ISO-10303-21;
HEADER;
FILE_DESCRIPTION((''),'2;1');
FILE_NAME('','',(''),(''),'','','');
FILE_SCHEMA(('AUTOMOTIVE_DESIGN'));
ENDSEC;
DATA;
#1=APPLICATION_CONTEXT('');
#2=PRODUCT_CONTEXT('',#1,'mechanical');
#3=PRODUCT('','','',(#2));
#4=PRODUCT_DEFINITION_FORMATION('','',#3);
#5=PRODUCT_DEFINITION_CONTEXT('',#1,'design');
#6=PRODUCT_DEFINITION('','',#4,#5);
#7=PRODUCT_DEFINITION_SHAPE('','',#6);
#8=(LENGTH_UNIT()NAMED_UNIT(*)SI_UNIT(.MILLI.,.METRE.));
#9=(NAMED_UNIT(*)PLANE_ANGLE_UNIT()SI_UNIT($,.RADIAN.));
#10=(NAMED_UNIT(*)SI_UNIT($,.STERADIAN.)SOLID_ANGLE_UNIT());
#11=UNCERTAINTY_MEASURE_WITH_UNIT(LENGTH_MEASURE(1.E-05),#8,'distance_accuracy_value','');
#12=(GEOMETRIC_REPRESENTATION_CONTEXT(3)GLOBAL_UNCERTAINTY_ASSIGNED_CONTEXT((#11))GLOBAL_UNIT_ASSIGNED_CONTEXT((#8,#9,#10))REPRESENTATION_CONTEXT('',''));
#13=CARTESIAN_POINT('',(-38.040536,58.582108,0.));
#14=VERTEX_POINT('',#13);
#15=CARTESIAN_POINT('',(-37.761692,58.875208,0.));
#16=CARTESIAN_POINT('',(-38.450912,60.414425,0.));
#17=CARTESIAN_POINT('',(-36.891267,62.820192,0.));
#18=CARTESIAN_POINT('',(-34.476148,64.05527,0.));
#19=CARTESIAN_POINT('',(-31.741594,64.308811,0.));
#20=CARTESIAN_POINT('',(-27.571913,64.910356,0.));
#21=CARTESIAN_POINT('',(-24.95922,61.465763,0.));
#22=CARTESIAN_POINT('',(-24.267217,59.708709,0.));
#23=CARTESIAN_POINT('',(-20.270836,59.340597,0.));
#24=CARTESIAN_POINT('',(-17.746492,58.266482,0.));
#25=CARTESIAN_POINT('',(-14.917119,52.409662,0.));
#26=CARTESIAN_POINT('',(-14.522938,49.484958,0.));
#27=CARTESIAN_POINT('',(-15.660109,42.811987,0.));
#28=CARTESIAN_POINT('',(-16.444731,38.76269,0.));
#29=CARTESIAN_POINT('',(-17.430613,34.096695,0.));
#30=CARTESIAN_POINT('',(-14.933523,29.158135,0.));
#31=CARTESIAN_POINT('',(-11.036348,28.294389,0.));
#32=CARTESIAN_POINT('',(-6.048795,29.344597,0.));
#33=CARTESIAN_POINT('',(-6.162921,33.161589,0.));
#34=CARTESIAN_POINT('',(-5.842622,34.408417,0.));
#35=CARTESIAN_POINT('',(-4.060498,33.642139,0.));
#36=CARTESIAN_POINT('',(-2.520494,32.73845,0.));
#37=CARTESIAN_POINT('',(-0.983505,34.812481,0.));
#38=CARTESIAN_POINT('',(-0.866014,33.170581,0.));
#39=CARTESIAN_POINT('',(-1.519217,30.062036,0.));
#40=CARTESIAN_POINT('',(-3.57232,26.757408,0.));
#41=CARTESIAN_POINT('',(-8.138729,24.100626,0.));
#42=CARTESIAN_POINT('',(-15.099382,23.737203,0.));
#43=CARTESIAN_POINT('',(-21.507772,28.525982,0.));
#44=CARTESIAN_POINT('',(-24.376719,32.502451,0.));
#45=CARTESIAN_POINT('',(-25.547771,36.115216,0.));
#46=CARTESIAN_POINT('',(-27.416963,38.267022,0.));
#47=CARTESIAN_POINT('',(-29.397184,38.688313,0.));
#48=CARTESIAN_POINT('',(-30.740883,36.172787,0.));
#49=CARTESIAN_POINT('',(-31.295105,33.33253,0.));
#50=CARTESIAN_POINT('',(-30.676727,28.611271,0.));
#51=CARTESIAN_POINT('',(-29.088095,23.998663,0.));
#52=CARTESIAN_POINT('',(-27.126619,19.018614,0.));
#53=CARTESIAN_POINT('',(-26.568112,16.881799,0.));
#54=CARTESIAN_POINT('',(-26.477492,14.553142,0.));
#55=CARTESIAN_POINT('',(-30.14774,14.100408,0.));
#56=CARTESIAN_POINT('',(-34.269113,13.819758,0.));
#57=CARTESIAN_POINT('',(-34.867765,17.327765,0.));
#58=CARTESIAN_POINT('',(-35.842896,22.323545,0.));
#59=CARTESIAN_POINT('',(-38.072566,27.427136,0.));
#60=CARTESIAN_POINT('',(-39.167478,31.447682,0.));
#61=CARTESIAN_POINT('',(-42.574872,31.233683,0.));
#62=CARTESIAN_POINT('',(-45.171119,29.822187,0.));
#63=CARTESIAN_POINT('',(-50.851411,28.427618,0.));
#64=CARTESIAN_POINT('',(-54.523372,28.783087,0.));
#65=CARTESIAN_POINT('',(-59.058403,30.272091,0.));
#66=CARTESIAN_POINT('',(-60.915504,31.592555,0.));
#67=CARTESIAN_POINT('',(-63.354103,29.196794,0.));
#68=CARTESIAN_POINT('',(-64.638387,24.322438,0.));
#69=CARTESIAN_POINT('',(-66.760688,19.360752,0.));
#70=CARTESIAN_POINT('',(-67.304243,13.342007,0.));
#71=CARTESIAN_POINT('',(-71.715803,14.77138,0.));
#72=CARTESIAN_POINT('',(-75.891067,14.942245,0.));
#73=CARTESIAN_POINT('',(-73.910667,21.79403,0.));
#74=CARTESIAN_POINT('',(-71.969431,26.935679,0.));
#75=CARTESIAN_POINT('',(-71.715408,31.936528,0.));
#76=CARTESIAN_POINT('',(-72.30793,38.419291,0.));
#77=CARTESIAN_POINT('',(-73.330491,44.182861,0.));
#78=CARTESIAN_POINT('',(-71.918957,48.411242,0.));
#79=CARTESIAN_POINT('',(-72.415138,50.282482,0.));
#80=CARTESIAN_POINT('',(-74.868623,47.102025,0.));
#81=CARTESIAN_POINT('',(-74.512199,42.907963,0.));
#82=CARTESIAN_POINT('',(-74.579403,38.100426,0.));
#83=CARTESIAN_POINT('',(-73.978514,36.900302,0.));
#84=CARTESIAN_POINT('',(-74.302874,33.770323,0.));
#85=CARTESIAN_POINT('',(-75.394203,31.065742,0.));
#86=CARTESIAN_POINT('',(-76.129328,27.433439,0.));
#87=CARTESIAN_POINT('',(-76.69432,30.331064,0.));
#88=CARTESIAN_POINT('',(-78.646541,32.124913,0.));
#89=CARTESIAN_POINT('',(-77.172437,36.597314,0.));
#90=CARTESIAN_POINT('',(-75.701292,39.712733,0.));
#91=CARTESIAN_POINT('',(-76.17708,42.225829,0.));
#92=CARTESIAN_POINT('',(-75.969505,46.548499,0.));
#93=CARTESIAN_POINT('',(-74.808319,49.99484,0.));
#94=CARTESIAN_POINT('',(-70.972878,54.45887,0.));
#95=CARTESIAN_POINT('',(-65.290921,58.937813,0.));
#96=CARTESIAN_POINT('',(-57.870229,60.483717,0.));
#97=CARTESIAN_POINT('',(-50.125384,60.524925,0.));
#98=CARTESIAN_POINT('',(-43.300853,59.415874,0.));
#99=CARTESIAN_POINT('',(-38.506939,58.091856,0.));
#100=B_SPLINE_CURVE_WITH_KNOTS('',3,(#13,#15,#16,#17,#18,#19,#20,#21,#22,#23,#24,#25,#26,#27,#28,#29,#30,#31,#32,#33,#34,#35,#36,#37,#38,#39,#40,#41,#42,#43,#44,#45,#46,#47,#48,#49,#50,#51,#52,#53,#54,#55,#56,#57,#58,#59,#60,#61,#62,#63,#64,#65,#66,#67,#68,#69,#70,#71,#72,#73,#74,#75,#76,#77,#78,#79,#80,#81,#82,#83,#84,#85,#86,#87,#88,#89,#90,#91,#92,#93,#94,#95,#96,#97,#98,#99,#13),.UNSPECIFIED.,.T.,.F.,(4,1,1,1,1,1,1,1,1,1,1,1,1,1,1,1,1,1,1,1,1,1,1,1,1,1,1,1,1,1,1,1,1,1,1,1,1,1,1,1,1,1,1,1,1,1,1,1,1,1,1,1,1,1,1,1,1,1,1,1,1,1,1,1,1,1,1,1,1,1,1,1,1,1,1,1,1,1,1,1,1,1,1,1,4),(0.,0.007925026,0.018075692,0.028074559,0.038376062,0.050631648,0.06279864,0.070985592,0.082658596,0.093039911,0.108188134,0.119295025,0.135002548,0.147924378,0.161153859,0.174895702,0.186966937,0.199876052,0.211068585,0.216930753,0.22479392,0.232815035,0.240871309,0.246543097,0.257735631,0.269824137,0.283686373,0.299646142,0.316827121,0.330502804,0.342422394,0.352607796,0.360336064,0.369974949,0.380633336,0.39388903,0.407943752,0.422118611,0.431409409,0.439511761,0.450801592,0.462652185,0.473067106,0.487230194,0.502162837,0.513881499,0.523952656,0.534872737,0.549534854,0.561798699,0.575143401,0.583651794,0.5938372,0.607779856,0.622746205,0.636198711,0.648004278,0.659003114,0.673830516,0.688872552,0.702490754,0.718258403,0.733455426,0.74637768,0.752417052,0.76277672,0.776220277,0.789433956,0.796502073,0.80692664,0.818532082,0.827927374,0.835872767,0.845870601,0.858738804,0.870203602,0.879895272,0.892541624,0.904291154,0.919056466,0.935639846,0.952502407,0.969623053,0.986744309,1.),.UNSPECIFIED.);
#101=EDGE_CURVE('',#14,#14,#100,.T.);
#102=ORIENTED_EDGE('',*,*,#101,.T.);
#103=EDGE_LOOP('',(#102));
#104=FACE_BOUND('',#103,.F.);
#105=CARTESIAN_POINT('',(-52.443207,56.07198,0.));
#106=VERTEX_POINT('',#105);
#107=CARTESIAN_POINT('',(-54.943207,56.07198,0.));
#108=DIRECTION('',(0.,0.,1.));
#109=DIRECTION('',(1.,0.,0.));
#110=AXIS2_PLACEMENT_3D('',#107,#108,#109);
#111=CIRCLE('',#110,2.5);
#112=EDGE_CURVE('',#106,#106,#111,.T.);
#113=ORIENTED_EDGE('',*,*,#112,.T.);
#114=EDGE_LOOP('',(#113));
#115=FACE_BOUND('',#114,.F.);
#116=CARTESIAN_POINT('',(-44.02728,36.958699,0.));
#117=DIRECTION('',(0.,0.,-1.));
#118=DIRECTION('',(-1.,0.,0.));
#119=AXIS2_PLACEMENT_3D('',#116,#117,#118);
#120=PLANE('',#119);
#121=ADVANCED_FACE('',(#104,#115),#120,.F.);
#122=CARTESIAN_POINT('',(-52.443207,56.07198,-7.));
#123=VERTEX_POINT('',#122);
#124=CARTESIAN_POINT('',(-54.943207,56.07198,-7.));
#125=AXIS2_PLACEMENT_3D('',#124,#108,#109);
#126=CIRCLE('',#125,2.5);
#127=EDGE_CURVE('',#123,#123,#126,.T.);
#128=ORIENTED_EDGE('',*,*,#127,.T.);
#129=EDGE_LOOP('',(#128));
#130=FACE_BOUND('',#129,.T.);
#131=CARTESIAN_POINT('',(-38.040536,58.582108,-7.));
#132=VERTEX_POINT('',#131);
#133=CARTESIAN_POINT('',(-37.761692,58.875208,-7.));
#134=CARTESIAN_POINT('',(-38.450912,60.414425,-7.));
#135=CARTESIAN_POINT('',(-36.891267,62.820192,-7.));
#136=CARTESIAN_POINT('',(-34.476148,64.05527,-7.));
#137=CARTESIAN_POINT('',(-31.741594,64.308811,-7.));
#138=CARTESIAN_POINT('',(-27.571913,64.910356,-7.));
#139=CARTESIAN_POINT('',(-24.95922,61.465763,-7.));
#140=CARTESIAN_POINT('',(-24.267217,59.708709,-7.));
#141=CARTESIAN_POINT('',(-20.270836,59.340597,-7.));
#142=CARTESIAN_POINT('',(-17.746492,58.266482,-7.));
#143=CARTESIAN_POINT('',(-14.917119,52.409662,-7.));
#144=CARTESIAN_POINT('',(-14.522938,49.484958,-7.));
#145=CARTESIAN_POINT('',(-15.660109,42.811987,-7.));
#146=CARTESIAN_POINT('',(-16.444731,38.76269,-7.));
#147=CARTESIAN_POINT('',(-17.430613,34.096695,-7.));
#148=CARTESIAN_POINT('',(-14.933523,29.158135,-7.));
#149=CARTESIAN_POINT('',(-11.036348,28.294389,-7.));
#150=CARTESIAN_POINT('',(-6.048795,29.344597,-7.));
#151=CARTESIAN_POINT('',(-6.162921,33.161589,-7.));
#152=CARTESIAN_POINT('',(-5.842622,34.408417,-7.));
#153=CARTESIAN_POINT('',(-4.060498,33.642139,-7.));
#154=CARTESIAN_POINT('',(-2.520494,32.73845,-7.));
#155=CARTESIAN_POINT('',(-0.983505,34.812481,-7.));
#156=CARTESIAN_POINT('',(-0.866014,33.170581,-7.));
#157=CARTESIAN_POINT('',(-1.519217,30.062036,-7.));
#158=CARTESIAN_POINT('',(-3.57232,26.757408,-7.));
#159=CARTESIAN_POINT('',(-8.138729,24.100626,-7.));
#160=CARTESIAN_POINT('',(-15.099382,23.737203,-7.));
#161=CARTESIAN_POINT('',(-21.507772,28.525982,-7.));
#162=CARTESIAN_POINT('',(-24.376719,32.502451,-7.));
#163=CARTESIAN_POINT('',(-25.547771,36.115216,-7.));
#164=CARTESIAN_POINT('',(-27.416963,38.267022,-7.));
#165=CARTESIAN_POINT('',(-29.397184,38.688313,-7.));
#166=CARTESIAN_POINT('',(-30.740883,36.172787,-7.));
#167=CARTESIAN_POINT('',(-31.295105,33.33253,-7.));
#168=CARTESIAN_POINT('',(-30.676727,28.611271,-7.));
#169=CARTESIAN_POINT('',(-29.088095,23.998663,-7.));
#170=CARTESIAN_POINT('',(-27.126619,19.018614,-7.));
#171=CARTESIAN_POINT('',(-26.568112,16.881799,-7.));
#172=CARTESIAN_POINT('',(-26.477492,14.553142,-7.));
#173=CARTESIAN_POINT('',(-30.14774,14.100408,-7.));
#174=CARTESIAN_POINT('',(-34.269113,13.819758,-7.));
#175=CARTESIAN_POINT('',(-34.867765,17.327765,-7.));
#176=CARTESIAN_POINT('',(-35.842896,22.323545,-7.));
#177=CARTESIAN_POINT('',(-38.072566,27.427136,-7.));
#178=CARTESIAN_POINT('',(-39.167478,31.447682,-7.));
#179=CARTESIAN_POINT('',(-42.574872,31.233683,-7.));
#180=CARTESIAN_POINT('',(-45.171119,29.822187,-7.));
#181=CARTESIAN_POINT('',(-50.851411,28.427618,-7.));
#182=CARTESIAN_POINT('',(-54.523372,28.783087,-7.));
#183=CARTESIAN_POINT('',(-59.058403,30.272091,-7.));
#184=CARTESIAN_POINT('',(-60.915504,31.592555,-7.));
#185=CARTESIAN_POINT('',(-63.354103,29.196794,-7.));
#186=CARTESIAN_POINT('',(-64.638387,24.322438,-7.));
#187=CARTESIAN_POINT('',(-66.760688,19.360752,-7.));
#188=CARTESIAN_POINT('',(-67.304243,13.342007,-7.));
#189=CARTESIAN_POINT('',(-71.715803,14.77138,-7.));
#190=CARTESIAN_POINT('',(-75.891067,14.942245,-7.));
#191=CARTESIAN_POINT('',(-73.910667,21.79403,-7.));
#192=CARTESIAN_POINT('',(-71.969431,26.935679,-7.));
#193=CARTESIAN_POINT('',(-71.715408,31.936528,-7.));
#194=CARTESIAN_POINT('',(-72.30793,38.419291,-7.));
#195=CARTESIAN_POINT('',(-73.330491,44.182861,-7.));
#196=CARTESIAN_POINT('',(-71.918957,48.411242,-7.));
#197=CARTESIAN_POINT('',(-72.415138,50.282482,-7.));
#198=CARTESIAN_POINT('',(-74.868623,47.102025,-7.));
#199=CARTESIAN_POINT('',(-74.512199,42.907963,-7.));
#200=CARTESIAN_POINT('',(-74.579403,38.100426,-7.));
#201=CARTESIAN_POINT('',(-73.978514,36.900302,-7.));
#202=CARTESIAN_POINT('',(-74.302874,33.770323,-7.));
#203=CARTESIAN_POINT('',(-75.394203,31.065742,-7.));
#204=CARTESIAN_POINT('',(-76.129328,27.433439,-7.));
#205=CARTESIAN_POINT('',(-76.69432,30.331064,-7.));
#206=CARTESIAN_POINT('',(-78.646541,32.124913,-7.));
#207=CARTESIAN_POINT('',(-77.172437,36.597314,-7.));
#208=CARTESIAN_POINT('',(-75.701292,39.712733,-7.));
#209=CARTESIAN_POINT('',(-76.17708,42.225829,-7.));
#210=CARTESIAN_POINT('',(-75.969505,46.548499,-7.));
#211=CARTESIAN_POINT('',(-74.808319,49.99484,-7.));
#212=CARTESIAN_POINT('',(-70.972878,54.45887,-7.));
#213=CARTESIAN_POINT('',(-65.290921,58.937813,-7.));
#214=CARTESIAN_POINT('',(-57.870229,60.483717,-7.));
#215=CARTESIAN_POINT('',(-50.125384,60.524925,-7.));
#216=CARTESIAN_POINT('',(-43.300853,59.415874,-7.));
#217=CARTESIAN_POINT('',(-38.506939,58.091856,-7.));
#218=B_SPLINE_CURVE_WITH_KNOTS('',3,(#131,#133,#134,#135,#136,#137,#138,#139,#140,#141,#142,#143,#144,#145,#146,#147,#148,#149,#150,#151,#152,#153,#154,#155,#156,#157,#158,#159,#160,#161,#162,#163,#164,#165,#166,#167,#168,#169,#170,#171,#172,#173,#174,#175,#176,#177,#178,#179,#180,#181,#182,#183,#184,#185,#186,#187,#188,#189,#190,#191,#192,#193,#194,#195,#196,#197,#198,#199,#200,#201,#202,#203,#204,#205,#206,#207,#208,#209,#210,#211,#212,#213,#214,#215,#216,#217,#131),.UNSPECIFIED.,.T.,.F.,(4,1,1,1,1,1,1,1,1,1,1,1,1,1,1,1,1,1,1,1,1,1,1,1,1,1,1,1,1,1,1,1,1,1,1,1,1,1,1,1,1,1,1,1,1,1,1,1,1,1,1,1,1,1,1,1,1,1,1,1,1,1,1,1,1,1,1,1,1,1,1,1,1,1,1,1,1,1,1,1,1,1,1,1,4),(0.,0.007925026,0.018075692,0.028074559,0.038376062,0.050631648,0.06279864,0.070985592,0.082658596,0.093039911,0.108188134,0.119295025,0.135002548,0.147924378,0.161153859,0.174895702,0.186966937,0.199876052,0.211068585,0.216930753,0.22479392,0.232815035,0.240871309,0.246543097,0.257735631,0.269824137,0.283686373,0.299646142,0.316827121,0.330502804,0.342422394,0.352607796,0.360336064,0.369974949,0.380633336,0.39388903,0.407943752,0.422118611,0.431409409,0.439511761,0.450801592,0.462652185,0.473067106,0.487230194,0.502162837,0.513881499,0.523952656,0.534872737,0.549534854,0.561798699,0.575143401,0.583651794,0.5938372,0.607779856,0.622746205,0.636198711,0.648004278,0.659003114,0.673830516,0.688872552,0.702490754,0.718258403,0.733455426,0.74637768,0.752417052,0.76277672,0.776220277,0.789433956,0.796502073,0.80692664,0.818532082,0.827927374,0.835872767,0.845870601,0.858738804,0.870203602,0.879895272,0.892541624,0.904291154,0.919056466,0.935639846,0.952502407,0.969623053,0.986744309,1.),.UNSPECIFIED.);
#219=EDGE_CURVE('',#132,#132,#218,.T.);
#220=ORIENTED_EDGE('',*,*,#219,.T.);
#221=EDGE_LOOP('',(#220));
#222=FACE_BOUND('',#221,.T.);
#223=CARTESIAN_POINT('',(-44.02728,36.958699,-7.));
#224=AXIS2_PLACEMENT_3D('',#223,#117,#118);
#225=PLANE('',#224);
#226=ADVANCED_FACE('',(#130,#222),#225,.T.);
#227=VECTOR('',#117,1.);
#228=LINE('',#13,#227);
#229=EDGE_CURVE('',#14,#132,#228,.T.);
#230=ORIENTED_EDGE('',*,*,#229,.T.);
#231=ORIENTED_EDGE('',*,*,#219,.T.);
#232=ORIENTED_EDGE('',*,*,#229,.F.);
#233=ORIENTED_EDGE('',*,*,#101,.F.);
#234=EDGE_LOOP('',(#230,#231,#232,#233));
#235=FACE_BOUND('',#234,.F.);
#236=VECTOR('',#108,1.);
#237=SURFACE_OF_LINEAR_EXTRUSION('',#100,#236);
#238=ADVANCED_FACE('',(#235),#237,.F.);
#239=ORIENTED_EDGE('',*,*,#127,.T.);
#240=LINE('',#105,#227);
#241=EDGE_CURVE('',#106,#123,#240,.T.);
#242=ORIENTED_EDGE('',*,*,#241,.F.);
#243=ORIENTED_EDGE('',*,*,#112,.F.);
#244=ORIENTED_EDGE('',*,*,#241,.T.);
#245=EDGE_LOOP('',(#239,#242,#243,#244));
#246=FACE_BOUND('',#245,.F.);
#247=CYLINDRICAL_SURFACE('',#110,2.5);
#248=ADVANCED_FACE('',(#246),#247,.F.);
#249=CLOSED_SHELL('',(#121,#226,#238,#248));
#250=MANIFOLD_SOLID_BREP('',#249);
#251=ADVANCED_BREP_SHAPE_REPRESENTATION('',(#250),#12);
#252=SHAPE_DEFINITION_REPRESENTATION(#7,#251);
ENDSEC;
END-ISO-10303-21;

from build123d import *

# Parameters (mm, degrees)
F1_DEPTH = 7
F2_R     = 2.5
F3_DEPTH = 7


with BuildPart() as f1:
    # F0 (on Top) → F1 (new body)
    with BuildSketch(Plane.XY):
        with BuildLine():
            add(Edge.make_bspline(
                [(-38.0405355122, 58.5821075321), (-37.7616920854, 58.8752084321), (-38.4509115224, 60.4144252747), (-36.8912670944, 62.8201922706), (-34.4761482171, 64.0552695288), (-31.741594429, 64.3088112244), (-27.571912684, 64.9103563277), (-24.9592201882, 61.4657628389), (-24.2672174495, 59.7087089783), (-20.270836338, 59.3405969518), (-17.7464919756, 58.2664820468), (-14.9171190454, 52.4096616094), (-14.5229383183, 49.4849582762), (-15.6601088656, 42.8119871017), (-16.4447314113, 38.7626901838), (-17.4306130592, 34.0966946187), (-14.9335226902, 29.1581350963), (-11.036347704, 28.2943890116), (-6.0487945061, 29.3445967564), (-6.1629209222, 33.1615890467), (-5.8426215251, 34.4084166137), (-4.060497983, 33.6421390741), (-2.5204940546, 32.7384503133), (-0.9835052076, 34.8124805933), (-0.8660138479, 33.1705812853), (-1.5192171105, 30.0620356353), (-3.5723199048, 26.7574077509), (-8.1387287813, 24.1006259486), (-15.0993822558, 23.7372030935), (-21.5077719011, 28.5259820845), (-24.376719469, 32.5024508324), (-25.547771341, 36.1152164253), (-27.4169634045, 38.2670221148), (-29.3971839382, 38.6883130727), (-30.7408826881, 36.1727866879), (-31.2951045598, 33.3325303081), (-30.6767268364, 28.6112711634), (-29.0880954099, 23.9986627663), (-27.1266194855, 19.0186140719), (-26.568111716, 16.8817989125), (-26.4774919485, 14.5531424842), (-30.1477398372, 14.1004079283), (-34.2691133605, 13.81975754), (-34.8677649079, 17.3277652031), (-35.8428960167, 22.3235449396), (-38.0725659654, 27.4271356015), (-39.167477751, 31.4476820563), (-42.5748720075, 31.2336825987), (-45.1711193813, 29.8221867938), (-50.8514114479, 28.4276176892), (-54.5233723297, 28.7830868948), (-59.0584026452, 30.2720912872), (-60.9155041476, 31.5925547621), (-63.3541031504, 29.1967940598), (-64.6383866205, 24.322438015), (-66.7606881673, 19.360751826), (-67.3042428271, 13.3420066341), (-71.7158030203, 14.7713797864), (-75.8910666993, 14.9422453013), (-73.9106670496, 21.7940304139), (-71.9694308181, 26.9356793641), (-71.7154077912, 31.9365278137), (-72.3079295729, 38.4192908061), (-73.3304914505, 44.1828607521), (-71.9189568788, 48.4112418783), (-72.4151380297, 50.2824819638), (-74.8686229486, 47.1020249155), (-74.5121986813, 42.9079632641), (-74.5794034955, 38.1004260125), (-73.9785135268, 36.9003015701), (-74.3028735264, 33.7703226695), (-75.3942033439, 31.0657420612), (-76.1293282871, 27.4334387077), (-76.6943195641, 30.3310636229), (-78.6465410892, 32.1249128685), (-77.1724372664, 36.5973140417), (-75.701291774, 39.7127328137), (-76.1770804652, 42.2258292262), (-75.9695046827, 46.5484991401), (-74.8083194931, 49.9948395747), (-70.9728784915, 54.4588701711), (-65.2909207775, 58.9378131806), (-57.8702287571, 60.4837165649), (-50.125383586, 60.5249250526), (-43.3008531913, 59.4158741189), (-38.5069392905, 58.0918561794), (-38.0405355122, 58.5821075321)],
                knots=[0, 0, 0, 0, 0.0079250263, 0.0180756918, 0.0280745586, 0.0383760619, 0.0506316475, 0.0627986403, 0.0709855916, 0.0826585956, 0.0930399111, 0.1081881335, 0.1192950252, 0.1350025479, 0.1479243776, 0.1611538592, 0.174895702, 0.1869669369, 0.1998760516, 0.2110685852, 0.2169307535, 0.2247939205, 0.2328150352, 0.2408713093, 0.2465430974, 0.2577356309, 0.2698241371, 0.2836863731, 0.2996461417, 0.3168271214, 0.3305028043, 0.342422394, 0.3526077963, 0.3603360641, 0.3699749493, 0.3806333359, 0.3938890302, 0.4079437517, 0.4221186114, 0.4314094086, 0.4395117612, 0.4508015917, 0.4626521849, 0.4730671058, 0.4872301942, 0.5021628368, 0.5138814987, 0.5239526556, 0.5348727374, 0.5495348545, 0.5617986993, 0.5751434015, 0.5836517944, 0.5938372003, 0.6077798557, 0.622746205, 0.6361987108, 0.648004278, 0.6590031141, 0.6738305162, 0.688872552, 0.7024907543, 0.7182584033, 0.7334554265, 0.7463776798, 0.7524170519, 0.7627767195, 0.7762202774, 0.7894339564, 0.7965020734, 0.8069266397, 0.8185320821, 0.8279273744, 0.8358727667, 0.8458706014, 0.8587388044, 0.870203602, 0.8798952724, 0.8925416242, 0.9042911544, 0.9190564661, 0.9356398463, 0.9525024072, 0.9696230535, 0.9867443094, 1, 1, 1, 1], degree=3))
        make_face()
    extrude(amount=-F1_DEPTH)

    # F2 (on face) → F3 (cut)
    with BuildSketch(Plane.XY):
        with Locations((-54.9432069991, 56.0719799719)):
            Circle(F2_R)
    extrude(amount=-F3_DEPTH, mode=Mode.SUBTRACT)


solid = f1.part
